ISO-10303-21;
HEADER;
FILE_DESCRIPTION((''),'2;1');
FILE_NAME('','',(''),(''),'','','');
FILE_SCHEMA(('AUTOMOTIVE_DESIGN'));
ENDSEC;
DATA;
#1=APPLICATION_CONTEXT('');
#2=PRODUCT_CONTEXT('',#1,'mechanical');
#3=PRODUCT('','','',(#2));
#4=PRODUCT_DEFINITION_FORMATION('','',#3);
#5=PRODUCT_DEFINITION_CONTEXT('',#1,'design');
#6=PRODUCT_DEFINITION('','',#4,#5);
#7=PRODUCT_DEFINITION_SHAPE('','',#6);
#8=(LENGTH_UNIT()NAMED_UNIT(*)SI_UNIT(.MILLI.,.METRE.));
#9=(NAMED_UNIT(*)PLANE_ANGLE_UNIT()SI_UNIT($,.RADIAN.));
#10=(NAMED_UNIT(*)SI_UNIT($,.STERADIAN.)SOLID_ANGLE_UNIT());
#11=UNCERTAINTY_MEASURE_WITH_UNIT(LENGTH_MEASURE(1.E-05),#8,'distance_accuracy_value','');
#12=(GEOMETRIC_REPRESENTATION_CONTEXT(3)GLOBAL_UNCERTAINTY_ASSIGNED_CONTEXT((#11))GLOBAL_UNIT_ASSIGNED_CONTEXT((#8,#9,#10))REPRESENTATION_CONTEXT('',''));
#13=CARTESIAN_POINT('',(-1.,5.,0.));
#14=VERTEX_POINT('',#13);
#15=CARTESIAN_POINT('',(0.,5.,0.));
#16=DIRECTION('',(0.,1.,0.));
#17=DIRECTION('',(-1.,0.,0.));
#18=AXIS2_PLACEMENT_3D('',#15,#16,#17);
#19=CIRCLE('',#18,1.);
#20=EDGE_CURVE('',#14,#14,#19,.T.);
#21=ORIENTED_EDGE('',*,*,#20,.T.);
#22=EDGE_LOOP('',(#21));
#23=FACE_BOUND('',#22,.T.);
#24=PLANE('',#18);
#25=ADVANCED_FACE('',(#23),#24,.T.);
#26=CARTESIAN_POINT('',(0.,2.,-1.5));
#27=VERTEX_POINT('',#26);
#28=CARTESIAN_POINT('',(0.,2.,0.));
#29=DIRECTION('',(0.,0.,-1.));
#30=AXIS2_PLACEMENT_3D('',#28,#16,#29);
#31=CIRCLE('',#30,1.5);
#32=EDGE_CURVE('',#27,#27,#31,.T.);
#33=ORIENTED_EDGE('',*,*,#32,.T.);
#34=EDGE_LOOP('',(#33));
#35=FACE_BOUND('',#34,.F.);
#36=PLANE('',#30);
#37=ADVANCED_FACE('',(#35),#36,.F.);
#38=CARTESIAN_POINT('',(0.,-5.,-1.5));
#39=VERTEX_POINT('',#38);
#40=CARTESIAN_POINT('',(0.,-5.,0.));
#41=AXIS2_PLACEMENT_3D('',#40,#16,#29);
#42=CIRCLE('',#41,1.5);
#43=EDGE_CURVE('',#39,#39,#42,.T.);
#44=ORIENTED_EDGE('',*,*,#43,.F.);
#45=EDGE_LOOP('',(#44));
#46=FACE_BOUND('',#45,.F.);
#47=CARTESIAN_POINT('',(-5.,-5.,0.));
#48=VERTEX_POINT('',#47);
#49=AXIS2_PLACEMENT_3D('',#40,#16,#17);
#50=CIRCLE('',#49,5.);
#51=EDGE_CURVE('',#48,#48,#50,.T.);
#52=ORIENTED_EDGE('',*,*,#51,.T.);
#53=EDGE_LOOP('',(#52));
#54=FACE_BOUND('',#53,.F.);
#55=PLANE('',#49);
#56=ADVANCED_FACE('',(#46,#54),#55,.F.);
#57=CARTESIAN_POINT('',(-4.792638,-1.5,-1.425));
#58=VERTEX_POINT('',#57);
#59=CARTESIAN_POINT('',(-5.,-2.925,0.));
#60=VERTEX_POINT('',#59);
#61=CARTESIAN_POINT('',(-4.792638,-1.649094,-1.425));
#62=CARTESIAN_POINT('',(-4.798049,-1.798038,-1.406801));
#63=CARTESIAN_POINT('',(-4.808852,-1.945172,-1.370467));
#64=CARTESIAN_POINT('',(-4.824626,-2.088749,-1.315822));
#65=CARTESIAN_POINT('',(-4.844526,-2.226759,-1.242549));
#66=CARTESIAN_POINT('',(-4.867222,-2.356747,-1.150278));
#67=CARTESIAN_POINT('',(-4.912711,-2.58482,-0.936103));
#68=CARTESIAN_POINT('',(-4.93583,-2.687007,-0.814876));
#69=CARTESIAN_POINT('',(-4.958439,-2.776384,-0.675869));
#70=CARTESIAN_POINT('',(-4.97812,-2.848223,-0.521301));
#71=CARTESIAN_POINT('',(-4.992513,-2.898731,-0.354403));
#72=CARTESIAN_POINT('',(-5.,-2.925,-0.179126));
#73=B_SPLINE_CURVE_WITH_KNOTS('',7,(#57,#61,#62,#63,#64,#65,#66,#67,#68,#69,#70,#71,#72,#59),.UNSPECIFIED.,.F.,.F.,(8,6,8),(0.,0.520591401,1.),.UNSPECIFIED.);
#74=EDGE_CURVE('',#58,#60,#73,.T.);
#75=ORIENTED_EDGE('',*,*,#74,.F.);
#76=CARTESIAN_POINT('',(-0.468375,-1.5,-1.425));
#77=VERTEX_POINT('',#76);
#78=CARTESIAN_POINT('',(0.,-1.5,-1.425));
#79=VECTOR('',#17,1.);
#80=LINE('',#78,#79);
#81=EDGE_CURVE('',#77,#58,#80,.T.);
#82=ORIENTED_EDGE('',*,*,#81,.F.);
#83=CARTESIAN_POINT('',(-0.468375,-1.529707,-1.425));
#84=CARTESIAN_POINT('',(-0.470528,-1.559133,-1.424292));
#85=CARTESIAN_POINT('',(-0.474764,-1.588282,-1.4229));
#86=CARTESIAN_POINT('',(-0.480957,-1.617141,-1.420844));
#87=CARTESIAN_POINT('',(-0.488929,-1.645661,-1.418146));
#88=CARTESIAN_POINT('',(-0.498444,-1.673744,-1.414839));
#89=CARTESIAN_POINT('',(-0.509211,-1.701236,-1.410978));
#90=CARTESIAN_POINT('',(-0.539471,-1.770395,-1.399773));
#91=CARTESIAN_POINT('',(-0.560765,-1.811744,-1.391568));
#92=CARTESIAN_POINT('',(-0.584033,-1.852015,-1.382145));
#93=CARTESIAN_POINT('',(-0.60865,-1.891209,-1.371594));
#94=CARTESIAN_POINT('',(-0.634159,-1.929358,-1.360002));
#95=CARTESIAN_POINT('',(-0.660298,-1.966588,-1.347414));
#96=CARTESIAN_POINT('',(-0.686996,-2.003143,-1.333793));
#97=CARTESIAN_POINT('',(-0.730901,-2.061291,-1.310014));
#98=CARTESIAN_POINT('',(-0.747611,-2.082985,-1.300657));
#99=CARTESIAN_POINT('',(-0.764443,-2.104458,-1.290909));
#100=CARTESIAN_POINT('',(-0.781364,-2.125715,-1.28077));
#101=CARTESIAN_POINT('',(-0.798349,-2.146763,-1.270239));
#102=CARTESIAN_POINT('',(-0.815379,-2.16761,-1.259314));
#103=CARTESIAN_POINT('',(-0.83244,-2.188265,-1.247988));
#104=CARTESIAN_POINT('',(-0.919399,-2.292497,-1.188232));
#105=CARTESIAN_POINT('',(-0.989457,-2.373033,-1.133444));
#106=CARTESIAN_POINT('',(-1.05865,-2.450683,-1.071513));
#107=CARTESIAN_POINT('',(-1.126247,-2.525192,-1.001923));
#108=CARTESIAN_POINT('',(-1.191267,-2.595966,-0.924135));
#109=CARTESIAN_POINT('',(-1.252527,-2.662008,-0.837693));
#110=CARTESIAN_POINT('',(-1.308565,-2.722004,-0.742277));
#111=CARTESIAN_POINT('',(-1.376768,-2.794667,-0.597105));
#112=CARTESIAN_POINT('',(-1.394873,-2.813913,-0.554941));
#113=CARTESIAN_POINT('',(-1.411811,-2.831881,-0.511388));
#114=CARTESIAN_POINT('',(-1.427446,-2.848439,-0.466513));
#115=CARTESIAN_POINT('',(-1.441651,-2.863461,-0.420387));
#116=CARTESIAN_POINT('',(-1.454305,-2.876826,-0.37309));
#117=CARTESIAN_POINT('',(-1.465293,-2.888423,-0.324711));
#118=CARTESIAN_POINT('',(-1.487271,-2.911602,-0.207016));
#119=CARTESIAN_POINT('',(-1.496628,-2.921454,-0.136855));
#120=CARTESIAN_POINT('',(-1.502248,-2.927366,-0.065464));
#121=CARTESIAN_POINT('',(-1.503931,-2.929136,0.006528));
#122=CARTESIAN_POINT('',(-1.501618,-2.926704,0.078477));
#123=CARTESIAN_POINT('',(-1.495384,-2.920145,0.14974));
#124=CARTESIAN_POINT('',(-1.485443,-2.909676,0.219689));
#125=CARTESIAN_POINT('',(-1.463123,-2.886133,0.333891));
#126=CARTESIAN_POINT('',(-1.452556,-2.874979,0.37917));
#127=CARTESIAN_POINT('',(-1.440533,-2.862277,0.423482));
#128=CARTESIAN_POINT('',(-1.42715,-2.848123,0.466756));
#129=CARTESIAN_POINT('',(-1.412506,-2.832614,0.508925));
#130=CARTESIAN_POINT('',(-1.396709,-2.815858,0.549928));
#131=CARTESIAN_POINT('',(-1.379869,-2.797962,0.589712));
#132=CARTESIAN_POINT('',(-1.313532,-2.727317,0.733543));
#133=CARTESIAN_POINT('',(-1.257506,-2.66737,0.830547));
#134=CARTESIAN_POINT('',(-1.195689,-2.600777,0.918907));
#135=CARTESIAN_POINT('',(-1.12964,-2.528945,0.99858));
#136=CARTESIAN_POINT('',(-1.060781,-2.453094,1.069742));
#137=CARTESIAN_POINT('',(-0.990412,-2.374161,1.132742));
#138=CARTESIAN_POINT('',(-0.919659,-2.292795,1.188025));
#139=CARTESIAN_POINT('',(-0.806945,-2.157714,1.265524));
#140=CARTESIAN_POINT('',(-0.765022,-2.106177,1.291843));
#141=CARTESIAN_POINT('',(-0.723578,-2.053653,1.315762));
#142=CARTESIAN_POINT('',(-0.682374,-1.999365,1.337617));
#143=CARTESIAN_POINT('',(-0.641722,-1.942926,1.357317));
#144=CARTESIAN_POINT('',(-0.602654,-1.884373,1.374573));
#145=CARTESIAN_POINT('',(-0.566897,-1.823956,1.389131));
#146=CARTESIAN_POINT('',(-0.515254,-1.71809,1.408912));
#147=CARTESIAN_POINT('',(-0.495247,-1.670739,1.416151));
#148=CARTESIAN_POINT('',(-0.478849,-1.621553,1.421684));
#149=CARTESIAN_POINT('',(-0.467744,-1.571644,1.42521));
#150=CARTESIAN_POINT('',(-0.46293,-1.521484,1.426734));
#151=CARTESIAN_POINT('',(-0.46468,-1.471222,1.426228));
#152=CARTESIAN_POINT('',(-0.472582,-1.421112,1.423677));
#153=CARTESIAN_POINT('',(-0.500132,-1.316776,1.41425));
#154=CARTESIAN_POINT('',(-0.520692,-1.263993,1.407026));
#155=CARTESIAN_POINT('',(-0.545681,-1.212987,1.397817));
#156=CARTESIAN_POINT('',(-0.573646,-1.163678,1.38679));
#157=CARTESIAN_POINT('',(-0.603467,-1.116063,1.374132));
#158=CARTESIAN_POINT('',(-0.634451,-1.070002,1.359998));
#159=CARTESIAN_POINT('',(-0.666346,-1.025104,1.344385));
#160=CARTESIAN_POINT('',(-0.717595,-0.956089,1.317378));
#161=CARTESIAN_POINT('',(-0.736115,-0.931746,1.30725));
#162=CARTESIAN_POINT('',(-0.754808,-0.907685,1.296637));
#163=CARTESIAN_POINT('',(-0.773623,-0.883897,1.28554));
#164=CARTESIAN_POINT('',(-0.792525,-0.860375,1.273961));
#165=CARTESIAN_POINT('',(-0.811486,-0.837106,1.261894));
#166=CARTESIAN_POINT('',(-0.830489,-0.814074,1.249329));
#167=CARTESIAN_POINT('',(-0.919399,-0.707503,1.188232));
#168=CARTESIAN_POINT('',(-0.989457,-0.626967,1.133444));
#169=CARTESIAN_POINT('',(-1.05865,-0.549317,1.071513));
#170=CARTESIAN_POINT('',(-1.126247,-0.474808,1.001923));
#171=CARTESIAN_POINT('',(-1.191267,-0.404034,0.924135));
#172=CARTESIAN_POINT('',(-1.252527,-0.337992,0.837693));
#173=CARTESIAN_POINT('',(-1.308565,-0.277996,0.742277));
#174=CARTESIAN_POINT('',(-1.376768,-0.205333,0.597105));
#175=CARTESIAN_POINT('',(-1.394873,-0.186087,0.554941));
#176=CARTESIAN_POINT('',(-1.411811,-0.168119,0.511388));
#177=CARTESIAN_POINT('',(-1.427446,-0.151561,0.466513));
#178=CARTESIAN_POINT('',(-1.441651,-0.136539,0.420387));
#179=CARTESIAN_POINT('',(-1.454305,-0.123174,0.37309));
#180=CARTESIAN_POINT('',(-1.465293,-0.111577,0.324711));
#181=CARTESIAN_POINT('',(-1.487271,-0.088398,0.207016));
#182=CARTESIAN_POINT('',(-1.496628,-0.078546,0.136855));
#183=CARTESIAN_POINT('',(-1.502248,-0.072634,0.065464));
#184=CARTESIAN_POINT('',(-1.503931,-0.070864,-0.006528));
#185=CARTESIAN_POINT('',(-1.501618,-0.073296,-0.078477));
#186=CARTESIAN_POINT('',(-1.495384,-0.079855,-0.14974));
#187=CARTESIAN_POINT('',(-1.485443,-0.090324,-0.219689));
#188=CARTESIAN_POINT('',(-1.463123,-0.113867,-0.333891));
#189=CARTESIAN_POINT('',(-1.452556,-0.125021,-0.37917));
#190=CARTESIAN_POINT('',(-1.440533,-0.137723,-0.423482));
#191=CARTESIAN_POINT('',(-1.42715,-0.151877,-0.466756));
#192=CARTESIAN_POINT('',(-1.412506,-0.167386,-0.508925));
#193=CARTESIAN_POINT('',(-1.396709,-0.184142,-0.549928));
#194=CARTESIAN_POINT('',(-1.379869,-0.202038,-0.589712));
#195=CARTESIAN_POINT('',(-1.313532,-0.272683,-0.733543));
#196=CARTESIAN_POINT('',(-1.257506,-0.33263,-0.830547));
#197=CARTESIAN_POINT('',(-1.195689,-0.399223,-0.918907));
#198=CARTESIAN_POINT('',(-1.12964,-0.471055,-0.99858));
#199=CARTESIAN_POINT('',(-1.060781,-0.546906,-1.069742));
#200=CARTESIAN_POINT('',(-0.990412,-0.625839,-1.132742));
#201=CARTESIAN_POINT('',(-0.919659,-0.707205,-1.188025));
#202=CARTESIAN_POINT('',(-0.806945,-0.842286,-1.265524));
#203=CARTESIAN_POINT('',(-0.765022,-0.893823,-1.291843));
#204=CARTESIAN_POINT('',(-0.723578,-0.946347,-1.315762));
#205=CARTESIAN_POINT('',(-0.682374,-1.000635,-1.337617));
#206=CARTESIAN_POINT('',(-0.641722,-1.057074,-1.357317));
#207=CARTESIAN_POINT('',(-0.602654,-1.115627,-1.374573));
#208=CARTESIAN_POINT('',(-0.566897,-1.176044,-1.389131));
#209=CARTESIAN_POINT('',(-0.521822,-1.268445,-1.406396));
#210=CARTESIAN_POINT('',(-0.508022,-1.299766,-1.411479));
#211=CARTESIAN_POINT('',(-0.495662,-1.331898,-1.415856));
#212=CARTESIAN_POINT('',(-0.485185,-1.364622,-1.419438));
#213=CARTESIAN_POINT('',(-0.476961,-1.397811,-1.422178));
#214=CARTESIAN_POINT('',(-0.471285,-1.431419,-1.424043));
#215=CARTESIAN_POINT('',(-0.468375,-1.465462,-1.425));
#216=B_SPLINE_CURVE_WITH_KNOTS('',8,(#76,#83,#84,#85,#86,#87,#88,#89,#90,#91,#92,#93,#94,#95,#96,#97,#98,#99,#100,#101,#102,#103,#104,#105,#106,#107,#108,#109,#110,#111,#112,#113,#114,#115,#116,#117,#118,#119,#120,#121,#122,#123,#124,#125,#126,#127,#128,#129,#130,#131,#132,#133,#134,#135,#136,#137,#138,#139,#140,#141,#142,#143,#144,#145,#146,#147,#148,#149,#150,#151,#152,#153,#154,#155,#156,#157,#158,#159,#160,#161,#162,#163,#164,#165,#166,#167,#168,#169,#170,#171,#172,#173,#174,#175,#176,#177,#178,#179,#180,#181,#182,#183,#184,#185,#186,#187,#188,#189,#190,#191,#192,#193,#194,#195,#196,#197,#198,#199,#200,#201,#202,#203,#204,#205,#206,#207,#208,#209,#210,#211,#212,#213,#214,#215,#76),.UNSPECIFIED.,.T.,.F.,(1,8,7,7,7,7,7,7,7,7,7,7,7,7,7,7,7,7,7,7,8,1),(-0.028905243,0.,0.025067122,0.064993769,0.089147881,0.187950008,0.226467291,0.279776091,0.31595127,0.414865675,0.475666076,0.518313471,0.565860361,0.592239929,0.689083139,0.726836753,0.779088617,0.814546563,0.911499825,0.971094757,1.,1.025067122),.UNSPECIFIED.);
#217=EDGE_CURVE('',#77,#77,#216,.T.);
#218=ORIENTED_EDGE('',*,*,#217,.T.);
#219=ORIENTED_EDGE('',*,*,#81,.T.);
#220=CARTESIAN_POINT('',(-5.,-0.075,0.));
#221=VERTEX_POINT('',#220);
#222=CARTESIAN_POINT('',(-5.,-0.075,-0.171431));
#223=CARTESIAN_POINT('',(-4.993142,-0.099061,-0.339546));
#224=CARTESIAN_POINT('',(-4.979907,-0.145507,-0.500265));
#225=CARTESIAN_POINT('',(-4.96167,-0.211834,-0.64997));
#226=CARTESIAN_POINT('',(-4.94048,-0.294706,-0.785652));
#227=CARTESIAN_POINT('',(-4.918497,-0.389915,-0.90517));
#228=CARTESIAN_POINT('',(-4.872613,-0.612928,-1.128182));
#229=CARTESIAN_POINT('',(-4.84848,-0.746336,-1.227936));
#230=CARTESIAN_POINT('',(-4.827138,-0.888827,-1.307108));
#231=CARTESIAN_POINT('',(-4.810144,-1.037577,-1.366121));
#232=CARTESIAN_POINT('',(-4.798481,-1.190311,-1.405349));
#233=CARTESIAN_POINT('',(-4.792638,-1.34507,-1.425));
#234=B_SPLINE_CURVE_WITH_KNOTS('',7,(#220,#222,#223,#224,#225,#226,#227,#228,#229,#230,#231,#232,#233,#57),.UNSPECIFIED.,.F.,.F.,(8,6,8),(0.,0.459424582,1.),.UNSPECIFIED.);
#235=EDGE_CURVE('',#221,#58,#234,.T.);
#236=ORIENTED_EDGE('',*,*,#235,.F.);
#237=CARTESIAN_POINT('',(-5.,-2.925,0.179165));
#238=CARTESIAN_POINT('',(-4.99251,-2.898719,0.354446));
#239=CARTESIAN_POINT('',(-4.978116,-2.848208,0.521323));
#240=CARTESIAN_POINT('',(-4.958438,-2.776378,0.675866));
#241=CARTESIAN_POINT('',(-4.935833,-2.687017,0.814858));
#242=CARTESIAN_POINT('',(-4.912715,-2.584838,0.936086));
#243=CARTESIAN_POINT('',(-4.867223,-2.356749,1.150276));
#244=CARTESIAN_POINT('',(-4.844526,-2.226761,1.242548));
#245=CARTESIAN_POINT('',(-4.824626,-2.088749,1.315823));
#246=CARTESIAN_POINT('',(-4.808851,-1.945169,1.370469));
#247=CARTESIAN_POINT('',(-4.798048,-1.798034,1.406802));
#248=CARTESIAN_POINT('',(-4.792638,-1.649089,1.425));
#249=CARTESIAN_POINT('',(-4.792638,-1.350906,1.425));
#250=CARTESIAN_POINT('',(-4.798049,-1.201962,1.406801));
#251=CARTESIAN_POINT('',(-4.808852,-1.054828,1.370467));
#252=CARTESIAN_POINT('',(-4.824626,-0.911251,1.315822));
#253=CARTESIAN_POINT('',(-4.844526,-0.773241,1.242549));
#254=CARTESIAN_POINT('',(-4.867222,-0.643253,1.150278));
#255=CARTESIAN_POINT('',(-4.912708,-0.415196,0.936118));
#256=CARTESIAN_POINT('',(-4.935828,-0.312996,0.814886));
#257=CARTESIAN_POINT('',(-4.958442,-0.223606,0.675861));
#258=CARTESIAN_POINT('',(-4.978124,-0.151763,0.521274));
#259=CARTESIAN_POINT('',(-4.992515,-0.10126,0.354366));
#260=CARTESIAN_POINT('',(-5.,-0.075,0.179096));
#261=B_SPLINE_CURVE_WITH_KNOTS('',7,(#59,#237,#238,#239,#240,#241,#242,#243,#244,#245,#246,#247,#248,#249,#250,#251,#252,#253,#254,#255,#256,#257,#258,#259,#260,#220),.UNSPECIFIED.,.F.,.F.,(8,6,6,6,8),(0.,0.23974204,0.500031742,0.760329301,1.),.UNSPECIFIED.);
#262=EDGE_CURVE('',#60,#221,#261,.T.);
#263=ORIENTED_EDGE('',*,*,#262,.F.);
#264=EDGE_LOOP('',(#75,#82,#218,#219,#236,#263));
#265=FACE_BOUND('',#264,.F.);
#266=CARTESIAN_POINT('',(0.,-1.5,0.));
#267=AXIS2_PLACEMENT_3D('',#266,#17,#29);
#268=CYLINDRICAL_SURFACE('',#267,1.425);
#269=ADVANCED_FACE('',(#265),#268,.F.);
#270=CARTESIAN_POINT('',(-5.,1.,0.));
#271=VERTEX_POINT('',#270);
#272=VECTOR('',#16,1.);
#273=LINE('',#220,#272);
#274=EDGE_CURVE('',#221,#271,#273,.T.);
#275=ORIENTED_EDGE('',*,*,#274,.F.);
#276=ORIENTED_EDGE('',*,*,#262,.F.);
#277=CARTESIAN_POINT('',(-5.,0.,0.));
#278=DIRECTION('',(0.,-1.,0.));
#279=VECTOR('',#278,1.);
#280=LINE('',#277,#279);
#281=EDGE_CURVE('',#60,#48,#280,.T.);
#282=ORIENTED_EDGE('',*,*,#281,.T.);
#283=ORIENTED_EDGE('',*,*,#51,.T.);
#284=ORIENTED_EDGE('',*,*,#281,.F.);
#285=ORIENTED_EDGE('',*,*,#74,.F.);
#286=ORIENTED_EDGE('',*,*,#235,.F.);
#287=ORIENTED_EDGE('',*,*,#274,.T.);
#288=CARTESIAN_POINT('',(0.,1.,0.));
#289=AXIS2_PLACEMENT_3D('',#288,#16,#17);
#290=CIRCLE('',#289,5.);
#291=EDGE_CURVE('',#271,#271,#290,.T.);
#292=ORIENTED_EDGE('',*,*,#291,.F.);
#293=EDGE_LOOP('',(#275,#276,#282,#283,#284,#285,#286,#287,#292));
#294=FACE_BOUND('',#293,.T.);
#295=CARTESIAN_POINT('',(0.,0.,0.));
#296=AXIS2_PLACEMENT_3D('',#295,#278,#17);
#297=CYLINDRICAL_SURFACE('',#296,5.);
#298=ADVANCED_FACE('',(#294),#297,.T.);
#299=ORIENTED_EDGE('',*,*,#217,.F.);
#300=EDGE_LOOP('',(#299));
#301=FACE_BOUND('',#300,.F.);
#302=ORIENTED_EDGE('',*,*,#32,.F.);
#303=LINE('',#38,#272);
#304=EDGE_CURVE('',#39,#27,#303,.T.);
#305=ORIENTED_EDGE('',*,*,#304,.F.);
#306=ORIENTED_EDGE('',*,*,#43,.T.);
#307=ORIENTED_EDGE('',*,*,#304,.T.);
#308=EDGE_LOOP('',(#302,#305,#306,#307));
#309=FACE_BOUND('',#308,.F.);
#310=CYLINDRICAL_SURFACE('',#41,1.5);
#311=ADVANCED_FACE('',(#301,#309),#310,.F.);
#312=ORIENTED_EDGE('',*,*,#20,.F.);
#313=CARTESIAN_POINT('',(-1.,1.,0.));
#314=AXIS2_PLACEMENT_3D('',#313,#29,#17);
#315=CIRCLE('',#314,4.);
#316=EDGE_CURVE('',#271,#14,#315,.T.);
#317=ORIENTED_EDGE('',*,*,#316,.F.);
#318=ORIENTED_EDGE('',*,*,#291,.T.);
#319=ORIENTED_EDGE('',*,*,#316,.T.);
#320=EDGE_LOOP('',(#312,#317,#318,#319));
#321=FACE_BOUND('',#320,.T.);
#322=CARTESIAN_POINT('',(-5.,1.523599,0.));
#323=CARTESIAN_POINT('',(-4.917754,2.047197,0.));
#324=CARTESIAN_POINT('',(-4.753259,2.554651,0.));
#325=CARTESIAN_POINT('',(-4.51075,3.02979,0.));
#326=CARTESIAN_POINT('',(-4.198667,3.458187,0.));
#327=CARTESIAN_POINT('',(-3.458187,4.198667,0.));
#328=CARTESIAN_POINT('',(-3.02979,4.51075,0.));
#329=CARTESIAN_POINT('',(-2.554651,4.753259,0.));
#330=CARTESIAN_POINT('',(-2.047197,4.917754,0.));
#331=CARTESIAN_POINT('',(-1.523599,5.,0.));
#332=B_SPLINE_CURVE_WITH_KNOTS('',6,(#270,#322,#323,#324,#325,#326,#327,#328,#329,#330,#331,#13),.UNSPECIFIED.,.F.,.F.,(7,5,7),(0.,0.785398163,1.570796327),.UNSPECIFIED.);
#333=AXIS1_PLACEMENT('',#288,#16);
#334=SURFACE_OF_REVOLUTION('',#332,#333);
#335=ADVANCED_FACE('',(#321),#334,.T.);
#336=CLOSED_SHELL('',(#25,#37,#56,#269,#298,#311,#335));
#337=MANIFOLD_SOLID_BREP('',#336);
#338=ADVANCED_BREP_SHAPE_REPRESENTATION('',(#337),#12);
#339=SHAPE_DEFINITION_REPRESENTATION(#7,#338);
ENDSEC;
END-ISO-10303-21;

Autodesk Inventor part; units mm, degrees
ref_plane "YZ Plane" through (0, 0, 0) normal (1, 0, 0) x (0, 1, 0)
ref_plane "XZ Plane" through (0, 0, 0) normal (0, 1, 0) x (-1, 0, 0)
ref_plane "XY Plane" through (0, 0, 0) normal (0, 0, 1) x (1, 0, 0)
sketch "Sketch4" plane through (0, 0, 0) normal (0, 1, 0) x (-1, 0, 0)
  circle A0 centre (0, 0) radius 5
extrude "Extrusion2" add sketch "Sketch4" along normal mid plane 10
fillet "Fillet5" radius 4 1 edges at (5, 5, 0)
sketch "Sketch14" plane through (0, -5, 0) normal (0, -1, 0) x (1, 0, 0)
  circle A0 centre (0, 0) radius 1 projected
hole "Hole6" at (0, -5, 0) direction (0, 1, 0) diameter 3 depth 7
sketch "Sketch15" plane through (0, 0, 0) normal (1, 0, 0) x (0, 1, 0)
  line L0 (-5, 5) -> (-5, -5) projected
  point P0 (0, 0)
  point P1 (-1.5, 0)
  dimension "d109" = 3.5
hole "Hole7" at (0, -1.5, 0) direction (-1, 0, 0) diameter 2.85 depth 10.4 thread size "M3.5x0.6" class "6H" standard "ISO Metric profile"
properties part number "Top Lock Cap" material "Mild Steel S355 J2"
